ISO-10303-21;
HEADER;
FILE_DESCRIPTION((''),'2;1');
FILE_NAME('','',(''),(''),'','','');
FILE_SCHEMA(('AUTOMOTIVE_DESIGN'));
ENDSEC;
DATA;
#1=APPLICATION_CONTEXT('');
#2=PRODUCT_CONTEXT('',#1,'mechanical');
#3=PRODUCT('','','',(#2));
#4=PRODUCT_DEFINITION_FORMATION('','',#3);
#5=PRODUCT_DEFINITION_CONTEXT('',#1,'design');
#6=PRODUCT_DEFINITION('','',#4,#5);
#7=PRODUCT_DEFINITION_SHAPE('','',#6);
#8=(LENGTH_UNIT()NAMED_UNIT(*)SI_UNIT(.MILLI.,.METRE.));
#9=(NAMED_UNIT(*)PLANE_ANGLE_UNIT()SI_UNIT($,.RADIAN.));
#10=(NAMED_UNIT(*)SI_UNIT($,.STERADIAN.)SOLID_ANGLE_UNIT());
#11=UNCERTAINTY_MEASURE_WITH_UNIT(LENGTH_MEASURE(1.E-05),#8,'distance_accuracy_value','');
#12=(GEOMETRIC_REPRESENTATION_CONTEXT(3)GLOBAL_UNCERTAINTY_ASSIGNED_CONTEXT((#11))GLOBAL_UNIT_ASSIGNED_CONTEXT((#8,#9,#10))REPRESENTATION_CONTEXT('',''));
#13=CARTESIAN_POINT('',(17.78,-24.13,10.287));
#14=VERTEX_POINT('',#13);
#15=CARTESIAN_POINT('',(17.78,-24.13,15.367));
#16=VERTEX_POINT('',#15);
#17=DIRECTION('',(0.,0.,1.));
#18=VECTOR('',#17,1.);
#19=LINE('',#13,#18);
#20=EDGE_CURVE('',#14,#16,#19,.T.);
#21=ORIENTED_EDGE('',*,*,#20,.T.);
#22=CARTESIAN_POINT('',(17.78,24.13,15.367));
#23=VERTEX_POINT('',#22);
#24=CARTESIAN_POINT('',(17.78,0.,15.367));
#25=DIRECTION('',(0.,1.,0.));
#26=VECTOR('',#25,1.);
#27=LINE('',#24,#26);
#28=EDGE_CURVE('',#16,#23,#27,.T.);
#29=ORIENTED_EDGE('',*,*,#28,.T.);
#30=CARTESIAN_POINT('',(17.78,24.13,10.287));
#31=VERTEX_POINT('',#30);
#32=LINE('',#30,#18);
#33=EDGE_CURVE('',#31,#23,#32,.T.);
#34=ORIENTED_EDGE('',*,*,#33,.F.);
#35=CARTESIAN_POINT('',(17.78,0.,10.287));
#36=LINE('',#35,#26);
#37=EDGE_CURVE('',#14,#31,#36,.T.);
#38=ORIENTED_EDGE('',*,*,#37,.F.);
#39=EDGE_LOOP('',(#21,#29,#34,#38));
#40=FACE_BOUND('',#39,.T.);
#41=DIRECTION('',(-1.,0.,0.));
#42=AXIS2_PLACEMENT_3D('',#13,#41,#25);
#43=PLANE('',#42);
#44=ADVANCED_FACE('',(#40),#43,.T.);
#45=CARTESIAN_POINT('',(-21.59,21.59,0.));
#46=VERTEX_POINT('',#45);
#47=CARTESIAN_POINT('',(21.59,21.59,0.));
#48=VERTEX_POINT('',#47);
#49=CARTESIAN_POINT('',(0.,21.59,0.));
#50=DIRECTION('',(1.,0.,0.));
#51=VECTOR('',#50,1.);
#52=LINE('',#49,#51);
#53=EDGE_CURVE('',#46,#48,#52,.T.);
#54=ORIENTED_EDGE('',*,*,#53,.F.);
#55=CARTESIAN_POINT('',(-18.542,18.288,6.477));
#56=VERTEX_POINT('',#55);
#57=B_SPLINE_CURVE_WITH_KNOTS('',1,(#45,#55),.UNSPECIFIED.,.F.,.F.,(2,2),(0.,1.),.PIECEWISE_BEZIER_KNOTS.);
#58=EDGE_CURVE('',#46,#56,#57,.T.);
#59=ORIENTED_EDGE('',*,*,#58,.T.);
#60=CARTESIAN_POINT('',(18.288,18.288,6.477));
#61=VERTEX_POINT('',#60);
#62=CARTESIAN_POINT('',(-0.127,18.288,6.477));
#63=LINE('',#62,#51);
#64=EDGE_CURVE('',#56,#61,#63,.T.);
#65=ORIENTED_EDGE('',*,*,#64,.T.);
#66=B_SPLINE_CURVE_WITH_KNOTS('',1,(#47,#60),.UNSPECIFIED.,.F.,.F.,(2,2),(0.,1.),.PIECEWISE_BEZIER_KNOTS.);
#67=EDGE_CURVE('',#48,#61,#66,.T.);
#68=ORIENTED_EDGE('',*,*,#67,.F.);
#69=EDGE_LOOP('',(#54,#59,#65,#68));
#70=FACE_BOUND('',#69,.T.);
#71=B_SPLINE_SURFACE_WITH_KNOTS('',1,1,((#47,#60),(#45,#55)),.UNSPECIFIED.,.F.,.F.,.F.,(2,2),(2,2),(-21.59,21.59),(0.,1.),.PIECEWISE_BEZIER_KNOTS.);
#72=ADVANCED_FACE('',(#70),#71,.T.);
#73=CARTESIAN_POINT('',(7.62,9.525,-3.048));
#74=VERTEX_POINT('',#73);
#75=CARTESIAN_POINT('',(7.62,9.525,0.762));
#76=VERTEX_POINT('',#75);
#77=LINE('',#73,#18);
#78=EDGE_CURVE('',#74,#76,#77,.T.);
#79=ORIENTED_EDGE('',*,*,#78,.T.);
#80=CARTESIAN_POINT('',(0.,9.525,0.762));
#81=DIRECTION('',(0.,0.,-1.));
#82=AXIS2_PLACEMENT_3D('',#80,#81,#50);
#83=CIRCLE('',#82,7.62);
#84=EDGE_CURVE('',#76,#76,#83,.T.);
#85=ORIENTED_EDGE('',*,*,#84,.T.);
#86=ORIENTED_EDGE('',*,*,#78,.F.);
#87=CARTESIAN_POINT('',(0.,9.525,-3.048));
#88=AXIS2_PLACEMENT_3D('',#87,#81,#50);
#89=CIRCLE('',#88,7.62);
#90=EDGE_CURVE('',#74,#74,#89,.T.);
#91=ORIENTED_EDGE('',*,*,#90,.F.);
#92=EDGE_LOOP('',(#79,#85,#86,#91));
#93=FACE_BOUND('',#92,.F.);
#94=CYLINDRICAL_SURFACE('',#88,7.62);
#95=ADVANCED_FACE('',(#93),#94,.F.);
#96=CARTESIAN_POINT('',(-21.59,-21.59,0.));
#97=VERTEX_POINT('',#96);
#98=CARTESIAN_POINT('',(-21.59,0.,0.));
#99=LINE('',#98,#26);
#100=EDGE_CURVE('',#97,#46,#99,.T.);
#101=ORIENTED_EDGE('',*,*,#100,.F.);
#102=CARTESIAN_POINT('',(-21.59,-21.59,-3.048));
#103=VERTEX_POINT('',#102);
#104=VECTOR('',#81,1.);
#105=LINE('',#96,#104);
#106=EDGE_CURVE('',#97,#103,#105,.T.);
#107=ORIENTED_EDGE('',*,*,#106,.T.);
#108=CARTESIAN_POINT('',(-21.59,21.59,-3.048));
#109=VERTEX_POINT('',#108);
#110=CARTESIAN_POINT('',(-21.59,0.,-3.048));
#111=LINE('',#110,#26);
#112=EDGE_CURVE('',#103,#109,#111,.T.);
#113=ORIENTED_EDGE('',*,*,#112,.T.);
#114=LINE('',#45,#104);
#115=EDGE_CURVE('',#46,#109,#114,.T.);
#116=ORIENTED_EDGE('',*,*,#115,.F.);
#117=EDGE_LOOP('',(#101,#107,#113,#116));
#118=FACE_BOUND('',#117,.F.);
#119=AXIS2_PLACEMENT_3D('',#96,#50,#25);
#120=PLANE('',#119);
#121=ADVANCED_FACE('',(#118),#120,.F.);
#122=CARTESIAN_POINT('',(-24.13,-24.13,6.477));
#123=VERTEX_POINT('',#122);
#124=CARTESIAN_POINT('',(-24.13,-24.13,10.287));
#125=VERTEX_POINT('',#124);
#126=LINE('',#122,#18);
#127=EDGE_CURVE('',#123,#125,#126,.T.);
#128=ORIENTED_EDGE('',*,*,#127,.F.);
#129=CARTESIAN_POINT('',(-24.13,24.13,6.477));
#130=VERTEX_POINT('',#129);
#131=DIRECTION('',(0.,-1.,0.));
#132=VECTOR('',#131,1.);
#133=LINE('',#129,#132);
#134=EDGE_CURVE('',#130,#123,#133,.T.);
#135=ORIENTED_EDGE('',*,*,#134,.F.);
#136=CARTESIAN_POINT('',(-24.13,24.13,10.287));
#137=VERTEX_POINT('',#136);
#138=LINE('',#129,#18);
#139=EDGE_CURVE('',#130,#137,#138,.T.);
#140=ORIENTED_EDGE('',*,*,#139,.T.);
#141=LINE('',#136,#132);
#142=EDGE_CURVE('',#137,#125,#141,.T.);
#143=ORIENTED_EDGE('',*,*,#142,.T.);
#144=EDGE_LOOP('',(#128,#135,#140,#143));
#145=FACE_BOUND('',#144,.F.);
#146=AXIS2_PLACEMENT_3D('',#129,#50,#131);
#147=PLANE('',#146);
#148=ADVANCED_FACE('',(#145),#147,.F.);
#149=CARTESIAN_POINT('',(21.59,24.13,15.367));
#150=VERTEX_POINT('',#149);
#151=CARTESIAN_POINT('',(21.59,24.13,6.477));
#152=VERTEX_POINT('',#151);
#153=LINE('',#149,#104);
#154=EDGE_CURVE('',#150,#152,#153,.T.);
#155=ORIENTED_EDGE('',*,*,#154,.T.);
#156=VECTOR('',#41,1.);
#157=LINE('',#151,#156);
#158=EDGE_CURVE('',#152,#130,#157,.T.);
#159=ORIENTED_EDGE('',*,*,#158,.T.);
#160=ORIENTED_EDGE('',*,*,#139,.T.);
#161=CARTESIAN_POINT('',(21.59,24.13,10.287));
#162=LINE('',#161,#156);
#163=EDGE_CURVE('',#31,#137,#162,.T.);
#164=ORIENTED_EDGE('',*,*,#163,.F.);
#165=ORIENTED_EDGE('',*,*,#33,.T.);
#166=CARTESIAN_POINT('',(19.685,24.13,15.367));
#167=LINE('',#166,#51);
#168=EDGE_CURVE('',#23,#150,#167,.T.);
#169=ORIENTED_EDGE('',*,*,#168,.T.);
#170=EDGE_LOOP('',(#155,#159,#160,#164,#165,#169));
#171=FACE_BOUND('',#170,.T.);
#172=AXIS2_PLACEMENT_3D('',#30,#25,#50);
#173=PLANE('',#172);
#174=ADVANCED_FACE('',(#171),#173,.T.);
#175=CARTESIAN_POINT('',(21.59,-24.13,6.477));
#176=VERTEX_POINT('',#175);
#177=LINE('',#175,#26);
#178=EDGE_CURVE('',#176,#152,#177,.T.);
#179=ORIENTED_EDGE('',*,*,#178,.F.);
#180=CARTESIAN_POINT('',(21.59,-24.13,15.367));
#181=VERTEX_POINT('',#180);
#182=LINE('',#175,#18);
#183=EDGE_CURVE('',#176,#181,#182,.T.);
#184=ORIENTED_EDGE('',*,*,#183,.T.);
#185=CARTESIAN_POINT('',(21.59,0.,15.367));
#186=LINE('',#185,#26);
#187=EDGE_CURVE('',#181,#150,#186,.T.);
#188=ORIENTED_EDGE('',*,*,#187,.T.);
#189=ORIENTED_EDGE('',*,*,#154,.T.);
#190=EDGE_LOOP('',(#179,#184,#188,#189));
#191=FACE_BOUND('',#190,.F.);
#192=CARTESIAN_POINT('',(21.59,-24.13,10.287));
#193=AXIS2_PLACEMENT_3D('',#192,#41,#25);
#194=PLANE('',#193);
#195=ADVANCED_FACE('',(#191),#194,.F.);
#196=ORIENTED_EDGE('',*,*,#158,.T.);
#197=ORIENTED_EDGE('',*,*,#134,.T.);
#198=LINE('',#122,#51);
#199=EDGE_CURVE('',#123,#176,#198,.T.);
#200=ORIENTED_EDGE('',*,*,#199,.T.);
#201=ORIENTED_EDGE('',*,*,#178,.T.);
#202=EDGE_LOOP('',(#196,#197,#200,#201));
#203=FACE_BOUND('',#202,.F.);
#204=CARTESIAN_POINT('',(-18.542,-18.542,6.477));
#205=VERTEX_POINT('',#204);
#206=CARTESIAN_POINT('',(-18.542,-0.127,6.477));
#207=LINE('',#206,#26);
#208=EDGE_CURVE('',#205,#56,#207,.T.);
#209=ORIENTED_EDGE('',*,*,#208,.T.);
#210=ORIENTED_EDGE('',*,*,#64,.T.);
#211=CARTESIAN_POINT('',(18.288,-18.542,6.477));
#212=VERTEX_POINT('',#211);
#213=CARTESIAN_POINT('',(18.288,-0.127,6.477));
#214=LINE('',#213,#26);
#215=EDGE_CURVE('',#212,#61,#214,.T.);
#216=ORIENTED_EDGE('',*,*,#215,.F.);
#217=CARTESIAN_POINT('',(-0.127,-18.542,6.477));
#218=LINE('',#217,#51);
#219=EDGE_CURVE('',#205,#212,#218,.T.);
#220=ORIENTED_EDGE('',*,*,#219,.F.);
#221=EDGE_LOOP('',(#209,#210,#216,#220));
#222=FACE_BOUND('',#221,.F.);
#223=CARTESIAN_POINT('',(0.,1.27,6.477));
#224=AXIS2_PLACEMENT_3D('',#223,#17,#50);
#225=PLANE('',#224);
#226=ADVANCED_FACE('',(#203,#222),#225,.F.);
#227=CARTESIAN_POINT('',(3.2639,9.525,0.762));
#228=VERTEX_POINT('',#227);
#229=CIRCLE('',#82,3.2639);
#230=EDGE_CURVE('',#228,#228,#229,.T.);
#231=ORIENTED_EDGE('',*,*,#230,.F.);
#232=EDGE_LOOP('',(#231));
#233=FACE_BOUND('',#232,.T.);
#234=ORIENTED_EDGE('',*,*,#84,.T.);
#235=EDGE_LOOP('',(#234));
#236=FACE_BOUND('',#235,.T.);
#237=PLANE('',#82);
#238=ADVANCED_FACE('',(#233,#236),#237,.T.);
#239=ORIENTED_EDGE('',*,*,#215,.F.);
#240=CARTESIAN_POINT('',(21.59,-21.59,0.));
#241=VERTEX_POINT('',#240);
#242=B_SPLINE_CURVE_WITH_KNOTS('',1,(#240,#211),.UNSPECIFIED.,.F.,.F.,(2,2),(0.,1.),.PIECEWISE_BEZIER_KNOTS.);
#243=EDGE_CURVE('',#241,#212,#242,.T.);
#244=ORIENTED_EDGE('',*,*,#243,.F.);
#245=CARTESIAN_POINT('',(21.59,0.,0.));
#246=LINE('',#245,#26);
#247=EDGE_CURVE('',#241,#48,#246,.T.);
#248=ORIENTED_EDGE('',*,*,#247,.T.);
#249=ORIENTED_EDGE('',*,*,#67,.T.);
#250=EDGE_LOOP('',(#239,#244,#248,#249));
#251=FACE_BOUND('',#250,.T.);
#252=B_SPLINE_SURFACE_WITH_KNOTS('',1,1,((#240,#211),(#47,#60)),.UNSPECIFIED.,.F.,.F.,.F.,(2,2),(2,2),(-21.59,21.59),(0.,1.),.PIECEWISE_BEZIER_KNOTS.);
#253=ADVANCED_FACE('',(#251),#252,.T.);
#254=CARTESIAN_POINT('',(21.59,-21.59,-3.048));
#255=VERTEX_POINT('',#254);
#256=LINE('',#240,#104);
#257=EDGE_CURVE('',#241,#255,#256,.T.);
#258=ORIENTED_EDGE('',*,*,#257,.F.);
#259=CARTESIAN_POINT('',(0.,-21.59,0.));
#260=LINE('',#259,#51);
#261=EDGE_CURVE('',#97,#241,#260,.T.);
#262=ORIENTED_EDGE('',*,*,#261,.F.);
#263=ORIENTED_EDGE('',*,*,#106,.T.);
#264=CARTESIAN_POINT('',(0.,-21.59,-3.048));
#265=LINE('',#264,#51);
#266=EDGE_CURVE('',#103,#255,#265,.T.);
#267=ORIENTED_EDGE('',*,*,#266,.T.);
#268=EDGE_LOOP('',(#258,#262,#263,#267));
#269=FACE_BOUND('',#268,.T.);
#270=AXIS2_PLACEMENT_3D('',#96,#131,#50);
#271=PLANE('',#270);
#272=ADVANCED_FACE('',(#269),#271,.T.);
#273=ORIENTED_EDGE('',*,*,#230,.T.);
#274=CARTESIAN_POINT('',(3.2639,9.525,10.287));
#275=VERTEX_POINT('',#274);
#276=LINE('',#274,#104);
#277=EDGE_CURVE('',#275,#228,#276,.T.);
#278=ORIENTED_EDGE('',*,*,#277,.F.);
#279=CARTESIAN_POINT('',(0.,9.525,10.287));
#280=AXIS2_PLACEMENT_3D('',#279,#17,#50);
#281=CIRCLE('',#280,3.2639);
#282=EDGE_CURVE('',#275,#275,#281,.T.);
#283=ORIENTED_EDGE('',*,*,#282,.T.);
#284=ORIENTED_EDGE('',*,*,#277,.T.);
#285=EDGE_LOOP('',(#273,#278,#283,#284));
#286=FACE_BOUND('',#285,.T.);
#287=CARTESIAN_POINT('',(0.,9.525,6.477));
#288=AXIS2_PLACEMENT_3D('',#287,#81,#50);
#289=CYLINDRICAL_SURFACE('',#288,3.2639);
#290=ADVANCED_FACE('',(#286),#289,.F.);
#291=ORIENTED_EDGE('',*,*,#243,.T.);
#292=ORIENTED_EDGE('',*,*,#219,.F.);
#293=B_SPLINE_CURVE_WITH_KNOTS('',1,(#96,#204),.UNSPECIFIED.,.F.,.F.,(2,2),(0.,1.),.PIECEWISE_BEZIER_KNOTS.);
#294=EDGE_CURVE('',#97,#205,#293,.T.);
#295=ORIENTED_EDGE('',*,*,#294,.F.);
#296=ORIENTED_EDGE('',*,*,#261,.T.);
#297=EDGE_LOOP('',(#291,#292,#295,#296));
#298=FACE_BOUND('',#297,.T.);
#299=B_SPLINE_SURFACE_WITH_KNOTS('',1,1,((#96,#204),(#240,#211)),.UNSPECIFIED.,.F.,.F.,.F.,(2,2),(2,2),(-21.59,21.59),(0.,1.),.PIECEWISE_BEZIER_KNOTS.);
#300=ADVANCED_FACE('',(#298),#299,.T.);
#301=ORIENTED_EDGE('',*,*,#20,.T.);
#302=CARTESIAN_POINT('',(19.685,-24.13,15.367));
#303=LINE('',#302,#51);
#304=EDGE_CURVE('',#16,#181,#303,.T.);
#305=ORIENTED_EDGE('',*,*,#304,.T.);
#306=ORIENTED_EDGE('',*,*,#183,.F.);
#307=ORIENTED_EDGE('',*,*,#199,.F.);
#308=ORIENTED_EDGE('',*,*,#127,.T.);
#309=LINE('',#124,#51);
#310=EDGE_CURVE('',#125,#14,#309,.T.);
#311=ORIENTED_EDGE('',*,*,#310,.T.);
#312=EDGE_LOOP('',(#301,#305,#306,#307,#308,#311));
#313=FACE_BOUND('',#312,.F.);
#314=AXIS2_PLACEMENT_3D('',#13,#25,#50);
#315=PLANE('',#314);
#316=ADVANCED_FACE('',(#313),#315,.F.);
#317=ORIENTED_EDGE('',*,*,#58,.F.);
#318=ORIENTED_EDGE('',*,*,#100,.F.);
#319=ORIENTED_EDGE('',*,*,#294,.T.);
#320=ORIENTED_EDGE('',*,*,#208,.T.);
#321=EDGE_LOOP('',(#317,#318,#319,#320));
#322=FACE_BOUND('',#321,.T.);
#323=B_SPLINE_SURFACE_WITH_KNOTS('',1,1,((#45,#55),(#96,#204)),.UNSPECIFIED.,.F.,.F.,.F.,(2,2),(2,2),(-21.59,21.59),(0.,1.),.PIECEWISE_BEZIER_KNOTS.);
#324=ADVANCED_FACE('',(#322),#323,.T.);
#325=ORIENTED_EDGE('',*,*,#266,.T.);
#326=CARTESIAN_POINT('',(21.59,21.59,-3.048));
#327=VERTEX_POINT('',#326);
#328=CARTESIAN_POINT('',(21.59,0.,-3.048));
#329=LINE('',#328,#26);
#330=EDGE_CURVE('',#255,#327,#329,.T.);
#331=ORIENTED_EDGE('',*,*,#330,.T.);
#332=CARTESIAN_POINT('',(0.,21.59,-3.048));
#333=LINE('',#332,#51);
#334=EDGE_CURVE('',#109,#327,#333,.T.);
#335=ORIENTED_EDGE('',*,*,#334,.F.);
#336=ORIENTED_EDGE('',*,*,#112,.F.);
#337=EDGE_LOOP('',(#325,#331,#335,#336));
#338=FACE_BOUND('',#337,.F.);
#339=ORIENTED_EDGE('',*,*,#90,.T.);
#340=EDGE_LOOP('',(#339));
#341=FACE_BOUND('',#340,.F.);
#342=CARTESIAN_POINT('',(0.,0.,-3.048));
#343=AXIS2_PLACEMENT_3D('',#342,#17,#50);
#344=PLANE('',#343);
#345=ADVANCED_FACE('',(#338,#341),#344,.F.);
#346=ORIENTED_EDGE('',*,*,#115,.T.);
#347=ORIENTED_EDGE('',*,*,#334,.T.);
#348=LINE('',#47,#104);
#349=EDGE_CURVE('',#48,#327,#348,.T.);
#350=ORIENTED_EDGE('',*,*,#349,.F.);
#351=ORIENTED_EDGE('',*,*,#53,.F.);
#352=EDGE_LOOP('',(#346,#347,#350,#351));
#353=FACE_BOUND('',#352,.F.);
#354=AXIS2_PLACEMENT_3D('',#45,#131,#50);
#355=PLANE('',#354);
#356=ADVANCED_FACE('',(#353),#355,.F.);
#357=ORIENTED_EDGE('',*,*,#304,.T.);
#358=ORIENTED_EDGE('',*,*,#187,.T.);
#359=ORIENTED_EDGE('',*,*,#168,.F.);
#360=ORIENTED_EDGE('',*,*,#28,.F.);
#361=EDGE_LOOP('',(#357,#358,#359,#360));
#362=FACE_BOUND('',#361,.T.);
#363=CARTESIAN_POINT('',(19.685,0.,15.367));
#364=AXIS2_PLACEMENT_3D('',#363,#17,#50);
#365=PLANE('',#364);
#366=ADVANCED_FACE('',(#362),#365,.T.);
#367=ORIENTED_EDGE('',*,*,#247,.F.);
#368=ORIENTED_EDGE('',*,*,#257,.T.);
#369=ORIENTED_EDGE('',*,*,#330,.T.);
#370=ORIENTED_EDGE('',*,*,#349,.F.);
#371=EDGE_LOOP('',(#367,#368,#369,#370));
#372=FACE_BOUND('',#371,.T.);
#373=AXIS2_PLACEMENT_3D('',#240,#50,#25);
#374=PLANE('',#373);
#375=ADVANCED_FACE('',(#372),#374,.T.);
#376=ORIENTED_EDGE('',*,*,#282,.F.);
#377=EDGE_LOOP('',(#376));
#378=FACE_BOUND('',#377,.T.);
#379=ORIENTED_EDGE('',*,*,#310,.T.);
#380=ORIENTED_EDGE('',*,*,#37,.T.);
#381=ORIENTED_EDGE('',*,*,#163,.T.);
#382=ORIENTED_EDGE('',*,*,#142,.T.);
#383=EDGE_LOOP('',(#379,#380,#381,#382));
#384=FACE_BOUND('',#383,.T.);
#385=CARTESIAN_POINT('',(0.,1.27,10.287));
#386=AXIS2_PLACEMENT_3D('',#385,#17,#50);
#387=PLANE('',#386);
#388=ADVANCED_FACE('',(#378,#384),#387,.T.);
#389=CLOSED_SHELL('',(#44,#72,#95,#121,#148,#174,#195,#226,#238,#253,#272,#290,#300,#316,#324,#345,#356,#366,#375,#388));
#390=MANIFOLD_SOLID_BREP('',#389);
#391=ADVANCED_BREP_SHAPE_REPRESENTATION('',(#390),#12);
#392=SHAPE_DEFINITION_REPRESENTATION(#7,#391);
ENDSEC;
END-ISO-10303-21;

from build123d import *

# Parameters (mm, degrees)
F0_W      = 43.18
F0_H      = 43.18
F3_DEPTH  = 3.048
F3_FACE_W = 43.18
F3_FACE_H = 43.18
F2_W      = 36.83
F2_H      = 36.83
F5_R      = 7.62
F6_DEPTH  = 3.81
F7_R      = 3.2639
F8_DEPTH  = 25.4
F9_W      = 36.83
F9_H      = 36.83
F9_W_2    = 43.18
F9_H_2    = 2.54
F9_R      = 3.2639
F10_DEPTH = 3.81
F11_W     = 3.81
F11_H     = 48.26
F12_DEPTH = 5.08


# Not quite as in the source:
# - a feature names something its author has since deleted; it is built from what else it names


with BuildPart() as f3:
    # F0 (on Top) → F3 (new body)
    with BuildSketch(Plane.XY):
        Rectangle(F0_W, F0_H)
    extrude(amount=-F3_DEPTH)

    # F3_face (on face) → F4 section 0
    with BuildSketch(Plane.XY):
        Rectangle(F3_FACE_W, F3_FACE_H)
    # F2 (on offset) → F4 section 1
    with BuildSketch(Plane.XY.offset(6.477)):
        with Locations((-0.127, -0.127)):
            Rectangle(F2_W, F2_H)
    loft()

    # F5 (on face) → F6 (cut)
    with BuildSketch(Plane(origin=(0, 0, -3.048), x_dir=(1, 0, 0), z_dir=(0, 0, -1))):
        with Locations((0, -9.525)):
            Circle(F5_R)
    extrude(amount=-F6_DEPTH, mode=Mode.SUBTRACT)

    # F7 (on face) → F8 (cut)
    with BuildSketch(Plane(origin=(0, 0, 0.762), x_dir=(1, 0, 0), z_dir=(0, 0, -1))):
        with Locations((0, -9.525)):
            Circle(F7_R)
    extrude(amount=-F8_DEPTH, mode=Mode.SUBTRACT)

    # F9 (on face) → F10 (join)
    with BuildSketch(Plane.XY.offset(6.477)):
        Polygon((-21.59, 24.13), (-21.59, 21.59), (-21.59, -21.59), (21.59, -21.59), (21.59, 21.59), (21.59, 24.13), align=None)
        with Locations((-0.127, -0.127)):
            Rectangle(F9_W, F9_H, mode=Mode.SUBTRACT)
        Polygon((-21.59, -21.59), (-21.59, 21.59), (-21.59, 24.13), (-24.13, 24.13), (-24.13, -24.13), (-21.59, -24.13), align=None)
        with Locations((0, -22.86)):
            Rectangle(F9_W_2, F9_H_2)
        with Locations((-0.127, -0.127)):
            Rectangle(F9_W, F9_H)
        with Locations((0, 9.525)):
            Circle(F9_R, mode=Mode.SUBTRACT)
    extrude(amount=F10_DEPTH)

    # F11 (on face) → F12 (join)
    with BuildSketch(Plane.XY.offset(10.287)):
        with Locations((19.685, 0)):
            Rectangle(F11_W, F11_H)
    extrude(amount=F12_DEPTH)


solid = f3.part
